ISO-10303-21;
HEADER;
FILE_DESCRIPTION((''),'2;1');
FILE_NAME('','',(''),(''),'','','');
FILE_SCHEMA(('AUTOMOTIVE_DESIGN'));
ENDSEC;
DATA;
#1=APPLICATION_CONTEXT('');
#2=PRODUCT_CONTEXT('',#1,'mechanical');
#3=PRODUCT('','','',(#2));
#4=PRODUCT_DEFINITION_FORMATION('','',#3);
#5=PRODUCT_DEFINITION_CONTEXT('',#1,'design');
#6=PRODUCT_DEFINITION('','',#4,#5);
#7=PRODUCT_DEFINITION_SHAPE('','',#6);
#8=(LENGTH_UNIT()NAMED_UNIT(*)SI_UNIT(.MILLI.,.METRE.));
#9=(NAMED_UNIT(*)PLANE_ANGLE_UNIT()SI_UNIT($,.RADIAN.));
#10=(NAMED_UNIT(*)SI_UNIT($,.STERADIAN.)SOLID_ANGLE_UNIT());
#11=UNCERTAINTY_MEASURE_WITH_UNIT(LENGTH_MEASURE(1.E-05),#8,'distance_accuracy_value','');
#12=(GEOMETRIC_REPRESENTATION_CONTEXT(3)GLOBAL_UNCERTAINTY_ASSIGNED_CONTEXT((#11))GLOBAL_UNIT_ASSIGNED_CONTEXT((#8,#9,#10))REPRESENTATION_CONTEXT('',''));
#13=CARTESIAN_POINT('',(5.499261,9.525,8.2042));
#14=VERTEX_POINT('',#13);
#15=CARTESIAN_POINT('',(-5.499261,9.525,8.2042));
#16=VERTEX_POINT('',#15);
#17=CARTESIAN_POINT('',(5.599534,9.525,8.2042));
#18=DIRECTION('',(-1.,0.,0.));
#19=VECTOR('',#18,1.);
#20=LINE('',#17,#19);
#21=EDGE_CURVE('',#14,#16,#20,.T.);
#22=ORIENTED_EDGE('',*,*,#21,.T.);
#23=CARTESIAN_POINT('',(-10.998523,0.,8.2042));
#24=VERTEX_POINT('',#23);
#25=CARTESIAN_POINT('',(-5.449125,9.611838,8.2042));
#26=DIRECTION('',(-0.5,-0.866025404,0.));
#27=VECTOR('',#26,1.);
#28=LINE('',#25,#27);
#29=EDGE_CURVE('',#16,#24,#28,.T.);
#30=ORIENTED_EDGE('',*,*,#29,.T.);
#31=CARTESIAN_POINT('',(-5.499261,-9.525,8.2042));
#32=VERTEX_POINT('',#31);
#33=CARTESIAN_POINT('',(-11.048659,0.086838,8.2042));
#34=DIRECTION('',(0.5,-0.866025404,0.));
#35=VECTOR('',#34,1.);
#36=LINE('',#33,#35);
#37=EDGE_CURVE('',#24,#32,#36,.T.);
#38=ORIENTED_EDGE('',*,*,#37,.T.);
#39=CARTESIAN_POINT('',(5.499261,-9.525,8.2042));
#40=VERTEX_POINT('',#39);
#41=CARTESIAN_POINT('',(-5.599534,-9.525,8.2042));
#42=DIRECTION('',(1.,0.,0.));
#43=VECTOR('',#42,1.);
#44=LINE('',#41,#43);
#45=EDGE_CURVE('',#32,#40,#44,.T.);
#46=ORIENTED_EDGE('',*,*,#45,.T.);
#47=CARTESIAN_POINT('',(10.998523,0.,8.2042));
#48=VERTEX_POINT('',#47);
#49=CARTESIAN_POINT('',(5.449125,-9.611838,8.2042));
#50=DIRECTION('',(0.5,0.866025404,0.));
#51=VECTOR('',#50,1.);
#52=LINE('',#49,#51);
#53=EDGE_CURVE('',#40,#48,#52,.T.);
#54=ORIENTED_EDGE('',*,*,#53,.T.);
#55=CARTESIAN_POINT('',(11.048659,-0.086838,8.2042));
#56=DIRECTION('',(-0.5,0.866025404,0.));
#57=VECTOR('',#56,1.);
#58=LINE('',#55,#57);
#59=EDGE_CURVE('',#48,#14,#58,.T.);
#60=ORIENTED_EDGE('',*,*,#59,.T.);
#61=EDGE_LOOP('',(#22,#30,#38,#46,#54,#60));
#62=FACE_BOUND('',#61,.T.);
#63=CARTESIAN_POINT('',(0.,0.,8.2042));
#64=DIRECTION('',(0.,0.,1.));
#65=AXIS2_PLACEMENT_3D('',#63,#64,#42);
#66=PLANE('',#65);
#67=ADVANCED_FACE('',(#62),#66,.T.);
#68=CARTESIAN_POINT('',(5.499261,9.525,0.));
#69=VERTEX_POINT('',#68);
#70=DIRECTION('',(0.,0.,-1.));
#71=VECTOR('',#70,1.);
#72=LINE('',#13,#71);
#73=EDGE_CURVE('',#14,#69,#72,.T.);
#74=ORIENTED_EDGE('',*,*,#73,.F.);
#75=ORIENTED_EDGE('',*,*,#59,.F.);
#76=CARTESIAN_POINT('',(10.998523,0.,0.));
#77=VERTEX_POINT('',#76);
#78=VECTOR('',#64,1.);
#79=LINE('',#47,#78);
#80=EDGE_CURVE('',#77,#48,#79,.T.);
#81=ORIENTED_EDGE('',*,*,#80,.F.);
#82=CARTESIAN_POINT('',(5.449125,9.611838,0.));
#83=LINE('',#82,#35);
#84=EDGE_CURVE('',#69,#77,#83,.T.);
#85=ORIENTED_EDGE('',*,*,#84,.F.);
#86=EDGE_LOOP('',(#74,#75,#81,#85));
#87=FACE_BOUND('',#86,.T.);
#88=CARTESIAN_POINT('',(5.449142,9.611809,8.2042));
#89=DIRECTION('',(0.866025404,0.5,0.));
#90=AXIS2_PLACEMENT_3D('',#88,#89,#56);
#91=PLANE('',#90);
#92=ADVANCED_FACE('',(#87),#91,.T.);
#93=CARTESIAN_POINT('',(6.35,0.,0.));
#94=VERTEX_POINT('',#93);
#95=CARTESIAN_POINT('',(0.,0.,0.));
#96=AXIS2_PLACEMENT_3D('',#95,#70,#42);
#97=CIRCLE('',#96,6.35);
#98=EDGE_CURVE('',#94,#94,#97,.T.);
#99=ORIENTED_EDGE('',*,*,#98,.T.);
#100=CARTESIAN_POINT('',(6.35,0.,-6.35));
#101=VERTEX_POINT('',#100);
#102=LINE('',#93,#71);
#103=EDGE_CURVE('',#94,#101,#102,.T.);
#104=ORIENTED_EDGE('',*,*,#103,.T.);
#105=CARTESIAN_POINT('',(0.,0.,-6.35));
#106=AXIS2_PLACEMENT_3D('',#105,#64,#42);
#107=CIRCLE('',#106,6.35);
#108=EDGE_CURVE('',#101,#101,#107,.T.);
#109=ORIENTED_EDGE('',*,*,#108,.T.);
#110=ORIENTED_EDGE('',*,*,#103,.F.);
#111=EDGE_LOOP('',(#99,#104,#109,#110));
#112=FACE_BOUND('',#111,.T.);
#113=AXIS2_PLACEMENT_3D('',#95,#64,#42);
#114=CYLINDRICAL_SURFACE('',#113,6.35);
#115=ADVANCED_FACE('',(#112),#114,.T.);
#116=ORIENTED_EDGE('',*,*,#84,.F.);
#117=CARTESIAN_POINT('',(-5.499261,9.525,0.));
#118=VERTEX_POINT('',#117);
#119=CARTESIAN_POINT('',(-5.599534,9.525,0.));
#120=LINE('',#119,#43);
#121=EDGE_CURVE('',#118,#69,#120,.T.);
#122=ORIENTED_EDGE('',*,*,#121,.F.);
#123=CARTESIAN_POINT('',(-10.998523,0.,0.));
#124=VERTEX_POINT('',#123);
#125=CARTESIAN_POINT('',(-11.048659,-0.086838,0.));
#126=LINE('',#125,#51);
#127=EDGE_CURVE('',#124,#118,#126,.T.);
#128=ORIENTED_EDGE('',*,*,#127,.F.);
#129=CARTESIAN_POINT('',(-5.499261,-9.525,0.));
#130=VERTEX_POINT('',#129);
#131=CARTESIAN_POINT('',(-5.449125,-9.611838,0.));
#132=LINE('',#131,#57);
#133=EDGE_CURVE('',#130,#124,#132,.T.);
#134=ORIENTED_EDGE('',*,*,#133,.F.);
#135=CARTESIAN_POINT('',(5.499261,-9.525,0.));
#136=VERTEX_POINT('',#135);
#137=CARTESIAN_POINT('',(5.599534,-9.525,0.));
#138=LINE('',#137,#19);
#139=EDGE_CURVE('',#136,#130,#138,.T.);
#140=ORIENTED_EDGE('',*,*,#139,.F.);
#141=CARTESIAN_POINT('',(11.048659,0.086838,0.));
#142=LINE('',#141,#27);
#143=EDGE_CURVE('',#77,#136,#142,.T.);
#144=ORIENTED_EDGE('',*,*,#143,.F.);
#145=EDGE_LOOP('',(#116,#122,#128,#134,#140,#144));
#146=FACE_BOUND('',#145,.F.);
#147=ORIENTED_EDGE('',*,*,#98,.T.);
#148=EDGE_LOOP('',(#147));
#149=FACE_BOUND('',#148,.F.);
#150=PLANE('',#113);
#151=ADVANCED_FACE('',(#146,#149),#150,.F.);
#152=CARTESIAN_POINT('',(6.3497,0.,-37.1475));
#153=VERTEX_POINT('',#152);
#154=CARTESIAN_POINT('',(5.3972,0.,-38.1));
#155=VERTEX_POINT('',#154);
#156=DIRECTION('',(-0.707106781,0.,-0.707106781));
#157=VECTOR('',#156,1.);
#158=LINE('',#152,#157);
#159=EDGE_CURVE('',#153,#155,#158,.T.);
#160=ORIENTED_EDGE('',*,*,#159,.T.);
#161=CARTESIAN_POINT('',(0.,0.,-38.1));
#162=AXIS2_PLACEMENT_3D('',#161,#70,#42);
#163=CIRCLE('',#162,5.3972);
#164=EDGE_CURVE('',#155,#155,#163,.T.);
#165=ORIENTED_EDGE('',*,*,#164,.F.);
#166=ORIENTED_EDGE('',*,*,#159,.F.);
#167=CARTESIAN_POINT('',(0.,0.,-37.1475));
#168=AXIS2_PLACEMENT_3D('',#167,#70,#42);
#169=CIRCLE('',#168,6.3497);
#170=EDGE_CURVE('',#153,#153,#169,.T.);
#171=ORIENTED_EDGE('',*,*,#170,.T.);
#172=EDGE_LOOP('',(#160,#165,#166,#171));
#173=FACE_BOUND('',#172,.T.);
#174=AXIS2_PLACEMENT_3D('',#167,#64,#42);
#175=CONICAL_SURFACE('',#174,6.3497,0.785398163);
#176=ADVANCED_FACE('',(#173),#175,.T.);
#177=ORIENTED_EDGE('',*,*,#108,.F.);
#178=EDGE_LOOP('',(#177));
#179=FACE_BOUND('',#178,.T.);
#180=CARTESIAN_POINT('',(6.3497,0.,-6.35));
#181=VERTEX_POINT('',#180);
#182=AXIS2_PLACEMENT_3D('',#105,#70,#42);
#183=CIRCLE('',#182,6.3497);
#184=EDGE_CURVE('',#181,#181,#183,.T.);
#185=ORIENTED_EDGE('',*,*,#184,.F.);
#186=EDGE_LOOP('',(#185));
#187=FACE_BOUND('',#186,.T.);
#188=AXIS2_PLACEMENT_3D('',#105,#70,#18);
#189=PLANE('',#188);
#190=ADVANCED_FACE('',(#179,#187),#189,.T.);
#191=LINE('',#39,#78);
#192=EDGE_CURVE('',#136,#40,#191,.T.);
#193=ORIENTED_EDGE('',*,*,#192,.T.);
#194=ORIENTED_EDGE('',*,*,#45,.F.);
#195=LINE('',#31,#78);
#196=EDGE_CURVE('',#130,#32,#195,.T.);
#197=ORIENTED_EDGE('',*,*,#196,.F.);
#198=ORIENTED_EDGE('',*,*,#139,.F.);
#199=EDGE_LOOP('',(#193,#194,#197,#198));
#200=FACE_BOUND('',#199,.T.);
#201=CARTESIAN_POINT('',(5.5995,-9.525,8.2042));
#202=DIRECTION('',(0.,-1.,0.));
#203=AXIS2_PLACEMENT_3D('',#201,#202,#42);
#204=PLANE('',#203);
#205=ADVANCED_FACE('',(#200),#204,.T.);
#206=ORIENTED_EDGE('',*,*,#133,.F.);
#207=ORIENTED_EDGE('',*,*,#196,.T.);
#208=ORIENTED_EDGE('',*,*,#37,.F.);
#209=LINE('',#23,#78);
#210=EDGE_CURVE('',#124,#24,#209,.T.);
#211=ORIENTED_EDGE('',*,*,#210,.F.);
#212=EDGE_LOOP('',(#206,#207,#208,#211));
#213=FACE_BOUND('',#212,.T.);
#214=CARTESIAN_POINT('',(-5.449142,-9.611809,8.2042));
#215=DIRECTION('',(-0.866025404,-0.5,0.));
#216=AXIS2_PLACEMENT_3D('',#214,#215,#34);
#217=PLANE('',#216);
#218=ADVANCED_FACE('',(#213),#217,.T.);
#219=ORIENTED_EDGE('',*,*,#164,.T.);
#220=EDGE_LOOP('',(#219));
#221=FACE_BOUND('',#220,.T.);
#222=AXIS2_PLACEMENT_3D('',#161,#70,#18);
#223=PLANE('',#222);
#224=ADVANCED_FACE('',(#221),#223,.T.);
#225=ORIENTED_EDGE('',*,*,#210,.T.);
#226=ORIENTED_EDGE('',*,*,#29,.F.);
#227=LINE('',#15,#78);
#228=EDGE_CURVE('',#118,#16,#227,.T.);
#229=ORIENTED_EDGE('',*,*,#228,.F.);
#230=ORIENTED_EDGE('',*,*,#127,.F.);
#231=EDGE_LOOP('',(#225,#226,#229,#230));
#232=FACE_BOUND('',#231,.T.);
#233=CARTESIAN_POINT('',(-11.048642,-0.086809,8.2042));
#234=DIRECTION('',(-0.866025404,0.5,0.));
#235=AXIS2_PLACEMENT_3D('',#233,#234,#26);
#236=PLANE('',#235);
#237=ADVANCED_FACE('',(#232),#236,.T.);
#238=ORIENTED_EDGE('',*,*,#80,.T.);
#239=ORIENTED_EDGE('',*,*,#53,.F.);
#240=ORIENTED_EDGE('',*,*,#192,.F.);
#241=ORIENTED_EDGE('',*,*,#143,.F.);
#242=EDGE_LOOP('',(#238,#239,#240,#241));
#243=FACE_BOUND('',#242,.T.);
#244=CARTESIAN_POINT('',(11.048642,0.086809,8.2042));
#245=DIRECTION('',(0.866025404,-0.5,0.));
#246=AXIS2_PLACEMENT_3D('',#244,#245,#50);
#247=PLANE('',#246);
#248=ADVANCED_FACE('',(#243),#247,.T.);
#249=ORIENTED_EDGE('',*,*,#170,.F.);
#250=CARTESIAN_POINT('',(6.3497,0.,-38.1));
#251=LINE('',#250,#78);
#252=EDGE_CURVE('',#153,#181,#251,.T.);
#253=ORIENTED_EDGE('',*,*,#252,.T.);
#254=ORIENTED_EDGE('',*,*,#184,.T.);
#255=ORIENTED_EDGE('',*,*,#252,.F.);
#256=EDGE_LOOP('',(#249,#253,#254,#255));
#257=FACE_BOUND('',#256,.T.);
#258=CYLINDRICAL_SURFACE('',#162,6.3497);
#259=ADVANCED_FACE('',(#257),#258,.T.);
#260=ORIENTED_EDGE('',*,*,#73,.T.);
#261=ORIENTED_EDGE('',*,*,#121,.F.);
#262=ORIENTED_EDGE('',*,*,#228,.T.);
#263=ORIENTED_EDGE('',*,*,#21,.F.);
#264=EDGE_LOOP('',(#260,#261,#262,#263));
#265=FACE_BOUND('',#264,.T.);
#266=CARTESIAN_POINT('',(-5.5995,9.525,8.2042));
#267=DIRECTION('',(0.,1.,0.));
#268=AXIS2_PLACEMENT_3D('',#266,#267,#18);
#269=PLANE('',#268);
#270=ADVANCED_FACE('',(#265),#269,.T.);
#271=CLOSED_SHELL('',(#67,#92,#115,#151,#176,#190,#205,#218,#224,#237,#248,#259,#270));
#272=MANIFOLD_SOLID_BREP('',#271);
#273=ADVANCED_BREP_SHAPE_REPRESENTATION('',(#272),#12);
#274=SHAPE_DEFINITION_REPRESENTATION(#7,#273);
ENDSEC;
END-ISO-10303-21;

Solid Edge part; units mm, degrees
sketch "Sketch1" plane through (0, 0, 0) normal (0, 0, 1) x (1, 0, 0)
  circle A0 centre (0, 0) radius 11.049
  dimension "D1" = 22.098
extrude "Protrusion1" add sketch "Sketch1" along normal blind 8.2042
sketch "Sketch2" plane through (0, 0, 0) normal (0, 0, -1) x (1, 0, 0)
  circle A0 centre (0, 0) radius 6.35
extrude "Protrusion2" add sketch "Sketch2" along normal blind 38.1
sketch "Sketch3" plane through (0, 0, -38.1) normal (0, 0, -1) x (1, 0, 0)
  circle A0 centre (0, 0) radius 6.3497
extrude "Cutout1" cut sketch "Sketch3" against normal blind 31.75 flip side to cut
chamfer "Chamfer_1" distance 0.9525 angle 45 1 edges at (-6.3497, 0, -38.1)
sketch "Sketch4" plane through (0, 0, 8.2042) normal (0, 0, 1) x (1, 0, 0)
  line L0 (-5.5995, 9.525) -> (5.5995, 9.525)
  dimension "D1" = 19.05
extrude "Cutout2" cut sketch "Sketch4" against normal up to next material side at (0, 9.575, 8.2042)
pattern_circular "Pattern1" count 6 over 360 about axis through (0, 0, 8.2042) along (0, 0, 1) of "Cutout2"
properties part number "24100340"
